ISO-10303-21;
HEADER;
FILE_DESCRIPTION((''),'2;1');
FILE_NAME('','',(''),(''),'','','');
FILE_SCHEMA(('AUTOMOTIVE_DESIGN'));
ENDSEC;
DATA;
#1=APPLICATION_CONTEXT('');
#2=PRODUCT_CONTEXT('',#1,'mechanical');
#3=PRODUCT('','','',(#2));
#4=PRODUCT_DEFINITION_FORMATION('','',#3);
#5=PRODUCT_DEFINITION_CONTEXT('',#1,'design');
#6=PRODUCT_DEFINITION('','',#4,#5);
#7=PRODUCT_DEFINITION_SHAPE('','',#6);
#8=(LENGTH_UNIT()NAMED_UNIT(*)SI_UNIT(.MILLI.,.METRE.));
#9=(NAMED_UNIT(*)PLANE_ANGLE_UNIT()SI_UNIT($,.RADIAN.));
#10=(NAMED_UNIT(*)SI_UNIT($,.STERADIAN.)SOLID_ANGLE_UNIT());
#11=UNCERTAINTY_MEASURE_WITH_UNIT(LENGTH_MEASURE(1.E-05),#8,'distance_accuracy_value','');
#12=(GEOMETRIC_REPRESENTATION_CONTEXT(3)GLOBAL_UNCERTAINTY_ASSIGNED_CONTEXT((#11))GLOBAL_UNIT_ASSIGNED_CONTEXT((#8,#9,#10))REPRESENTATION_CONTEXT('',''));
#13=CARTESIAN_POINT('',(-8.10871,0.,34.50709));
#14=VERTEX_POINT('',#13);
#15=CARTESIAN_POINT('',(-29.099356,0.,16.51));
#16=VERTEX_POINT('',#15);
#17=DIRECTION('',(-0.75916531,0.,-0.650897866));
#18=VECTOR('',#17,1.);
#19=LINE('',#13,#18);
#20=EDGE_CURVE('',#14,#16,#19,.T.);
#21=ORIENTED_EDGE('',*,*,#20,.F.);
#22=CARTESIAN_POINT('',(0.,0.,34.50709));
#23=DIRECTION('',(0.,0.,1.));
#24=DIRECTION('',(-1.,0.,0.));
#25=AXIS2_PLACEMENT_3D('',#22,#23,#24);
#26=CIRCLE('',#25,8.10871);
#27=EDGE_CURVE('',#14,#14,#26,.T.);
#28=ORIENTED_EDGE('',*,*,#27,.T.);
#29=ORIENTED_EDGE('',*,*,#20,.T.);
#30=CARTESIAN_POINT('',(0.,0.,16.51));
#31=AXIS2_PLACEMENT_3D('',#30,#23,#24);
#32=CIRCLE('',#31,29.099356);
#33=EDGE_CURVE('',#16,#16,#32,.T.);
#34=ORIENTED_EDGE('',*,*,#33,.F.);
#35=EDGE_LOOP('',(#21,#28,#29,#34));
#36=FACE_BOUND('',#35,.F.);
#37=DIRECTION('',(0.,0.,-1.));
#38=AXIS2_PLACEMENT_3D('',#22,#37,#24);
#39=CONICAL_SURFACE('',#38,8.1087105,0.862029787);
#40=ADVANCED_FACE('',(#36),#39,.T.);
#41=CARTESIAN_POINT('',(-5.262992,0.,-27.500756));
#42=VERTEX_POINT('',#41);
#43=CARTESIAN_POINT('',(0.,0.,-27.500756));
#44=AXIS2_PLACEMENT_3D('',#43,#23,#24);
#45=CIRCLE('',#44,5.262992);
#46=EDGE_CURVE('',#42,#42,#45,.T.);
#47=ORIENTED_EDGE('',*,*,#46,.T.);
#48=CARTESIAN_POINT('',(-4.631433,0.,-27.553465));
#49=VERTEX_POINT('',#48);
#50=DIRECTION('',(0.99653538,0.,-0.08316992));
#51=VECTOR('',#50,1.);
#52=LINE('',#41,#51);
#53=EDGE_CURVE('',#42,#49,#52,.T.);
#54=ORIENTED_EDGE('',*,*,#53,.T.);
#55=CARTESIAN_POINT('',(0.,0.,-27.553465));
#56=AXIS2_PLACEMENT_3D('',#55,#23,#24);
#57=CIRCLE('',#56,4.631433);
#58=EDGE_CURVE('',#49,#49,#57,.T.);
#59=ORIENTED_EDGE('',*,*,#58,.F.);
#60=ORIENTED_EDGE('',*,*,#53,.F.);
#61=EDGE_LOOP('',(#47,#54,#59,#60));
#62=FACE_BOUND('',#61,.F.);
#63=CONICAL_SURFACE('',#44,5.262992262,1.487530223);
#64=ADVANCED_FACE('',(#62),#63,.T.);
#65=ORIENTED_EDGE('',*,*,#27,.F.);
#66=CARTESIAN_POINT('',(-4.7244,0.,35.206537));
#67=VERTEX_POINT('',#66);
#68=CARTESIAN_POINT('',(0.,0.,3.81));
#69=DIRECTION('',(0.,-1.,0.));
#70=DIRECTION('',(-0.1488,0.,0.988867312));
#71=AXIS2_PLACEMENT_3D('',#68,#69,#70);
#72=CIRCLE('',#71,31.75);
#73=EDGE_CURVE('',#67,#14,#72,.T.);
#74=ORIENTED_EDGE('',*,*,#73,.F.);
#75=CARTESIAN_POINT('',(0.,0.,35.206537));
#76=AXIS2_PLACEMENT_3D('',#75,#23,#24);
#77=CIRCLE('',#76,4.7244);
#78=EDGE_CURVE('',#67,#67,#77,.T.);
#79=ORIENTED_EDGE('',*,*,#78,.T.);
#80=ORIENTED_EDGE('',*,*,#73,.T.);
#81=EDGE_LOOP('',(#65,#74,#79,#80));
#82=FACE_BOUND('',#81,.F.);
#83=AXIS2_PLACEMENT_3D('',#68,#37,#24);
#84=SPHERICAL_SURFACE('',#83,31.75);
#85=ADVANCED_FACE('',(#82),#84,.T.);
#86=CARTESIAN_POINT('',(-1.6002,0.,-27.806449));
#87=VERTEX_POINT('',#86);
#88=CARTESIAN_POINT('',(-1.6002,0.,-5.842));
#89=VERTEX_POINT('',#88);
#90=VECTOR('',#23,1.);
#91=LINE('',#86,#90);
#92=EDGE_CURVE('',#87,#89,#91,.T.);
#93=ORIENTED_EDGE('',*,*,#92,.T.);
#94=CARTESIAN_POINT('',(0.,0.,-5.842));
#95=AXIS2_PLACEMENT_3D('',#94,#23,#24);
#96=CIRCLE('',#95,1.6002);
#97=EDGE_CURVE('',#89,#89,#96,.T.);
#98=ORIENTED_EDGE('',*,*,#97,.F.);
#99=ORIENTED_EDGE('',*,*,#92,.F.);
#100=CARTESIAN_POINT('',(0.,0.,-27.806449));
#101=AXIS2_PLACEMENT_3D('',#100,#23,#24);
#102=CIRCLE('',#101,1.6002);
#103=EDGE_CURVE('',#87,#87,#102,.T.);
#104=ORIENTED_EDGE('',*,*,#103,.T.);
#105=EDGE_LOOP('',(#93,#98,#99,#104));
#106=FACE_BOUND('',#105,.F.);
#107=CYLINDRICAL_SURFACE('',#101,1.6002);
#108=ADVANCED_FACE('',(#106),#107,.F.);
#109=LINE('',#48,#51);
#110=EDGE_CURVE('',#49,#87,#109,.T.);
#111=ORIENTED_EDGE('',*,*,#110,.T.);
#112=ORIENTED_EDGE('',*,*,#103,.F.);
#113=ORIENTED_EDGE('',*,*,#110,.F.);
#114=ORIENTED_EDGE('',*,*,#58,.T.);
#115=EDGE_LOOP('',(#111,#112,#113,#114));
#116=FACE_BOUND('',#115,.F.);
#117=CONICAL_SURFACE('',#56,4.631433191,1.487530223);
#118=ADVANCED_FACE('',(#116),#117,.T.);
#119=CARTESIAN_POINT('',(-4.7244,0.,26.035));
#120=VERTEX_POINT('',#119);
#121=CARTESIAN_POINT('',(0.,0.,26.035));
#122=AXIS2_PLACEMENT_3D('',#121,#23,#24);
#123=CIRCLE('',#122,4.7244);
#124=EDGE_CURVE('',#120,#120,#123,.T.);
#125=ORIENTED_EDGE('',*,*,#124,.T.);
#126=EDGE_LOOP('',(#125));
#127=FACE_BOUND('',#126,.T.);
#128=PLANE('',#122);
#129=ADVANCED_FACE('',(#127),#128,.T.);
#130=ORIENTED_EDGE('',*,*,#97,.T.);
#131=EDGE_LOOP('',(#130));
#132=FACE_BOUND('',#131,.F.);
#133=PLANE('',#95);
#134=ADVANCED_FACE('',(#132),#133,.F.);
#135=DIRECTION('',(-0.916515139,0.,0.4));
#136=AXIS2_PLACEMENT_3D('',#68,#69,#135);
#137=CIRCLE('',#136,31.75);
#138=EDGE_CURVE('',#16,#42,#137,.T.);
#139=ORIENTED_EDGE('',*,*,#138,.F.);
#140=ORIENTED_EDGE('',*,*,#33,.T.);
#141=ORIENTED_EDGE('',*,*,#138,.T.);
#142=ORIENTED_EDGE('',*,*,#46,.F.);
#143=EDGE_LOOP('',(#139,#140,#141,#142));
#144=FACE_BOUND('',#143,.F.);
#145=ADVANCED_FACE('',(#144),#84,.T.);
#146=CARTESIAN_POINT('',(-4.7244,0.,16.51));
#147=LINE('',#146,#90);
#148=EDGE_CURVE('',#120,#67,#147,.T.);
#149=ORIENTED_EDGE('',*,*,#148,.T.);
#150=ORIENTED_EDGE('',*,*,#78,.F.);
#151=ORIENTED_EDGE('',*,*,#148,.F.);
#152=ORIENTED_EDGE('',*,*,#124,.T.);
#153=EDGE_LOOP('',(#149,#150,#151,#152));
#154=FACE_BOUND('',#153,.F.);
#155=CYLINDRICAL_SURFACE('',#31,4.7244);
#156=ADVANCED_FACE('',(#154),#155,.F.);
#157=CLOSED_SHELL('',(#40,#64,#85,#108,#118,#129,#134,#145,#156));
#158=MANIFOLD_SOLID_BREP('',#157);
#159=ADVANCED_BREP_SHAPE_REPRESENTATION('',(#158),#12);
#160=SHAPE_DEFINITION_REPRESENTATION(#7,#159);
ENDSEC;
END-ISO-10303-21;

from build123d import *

# Parameters (mm, degrees)
F0_W = 4.7244
F0_H = 9.525


# Not quite as in the source:
# - a feature names something its author has since deleted; it is built from what else it names


with BuildPart() as f1:
    # F0 (on Front) → F1 (revolve)
    with BuildSketch(Plane.XZ):
        with BuildLine():
            Line((-8.1087104998, 34.5070896671), (-22.5402639736, 16.51))
            ThreePointArc((-22.5402639736, 16.51), (-25.8838273037, -10.5200325148), (-4.6314331906, -27.5534648747))
            Line((-4.6314331906, -27.5534648747), (-1.6002, -27.8064487898))
            Line((-1.6002, -27.8064487898), (-1.6002, -5.842))
            Line((-1.6002, -5.842), (0, -5.842))
            Line((0, -5.842), (0, 0))
            Line((0, 0), (0, 3.81))
            Line((0, 3.81), (0, 16.51))
            Line((0, 16.51), (-4.7244, 16.51))
            Line((-4.7244, 16.51), (-4.7244, 26.035))
            Line((-4.7244, 26.035), (-4.7244, 35.2065371441))
            ThreePointArc((-4.7244, 35.2065371441), (-6.4260787397, 34.9028932721), (-8.1087104998, 34.5070896671))
        make_face()
        with Locations((-2.3622, 21.2725)):
            Rectangle(F0_W, F0_H)
        with BuildLine():
            Line((0, 0), (0, -5.842))
            Line((0, -5.842), (0, -25.4))
            ThreePointArc((0, -25.4), (23.0706956982, -10.625582337), (19.302328875, 16.51))
            Line((19.302328875, 16.51), (0, 16.51))
            Line((0, 16.51), (0, 3.81))
            Line((0, 3.81), (0, 0))
        make_face()
    revolve(axis=Axis((0, 0, 3.81), (0, 0, 1)))

    # F0 (on Front) → F2 (revolve)
    with BuildSketch(Plane.XZ):
        with BuildLine():
            Line((-8.1087104998, 34.5070896671), (-22.5402639736, 16.51))
            ThreePointArc((-22.5402639736, 16.51), (-25.8838273037, -10.5200325148), (-4.6314331906, -27.5534648747))
            Line((-4.6314331906, -27.5534648747), (-1.6002, -27.8064487898))
            Line((-1.6002, -27.8064487898), (-1.6002, -5.842))
            Line((-1.6002, -5.842), (0, -5.842))
            Line((0, -5.842), (0, 0))
            Line((0, 0), (0, 3.81))
            Line((0, 3.81), (0, 16.51))
            Line((0, 16.51), (-4.7244, 16.51))
            Line((-4.7244, 16.51), (-4.7244, 26.035))
            Line((-4.7244, 26.035), (-4.7244, 35.2065371441))
            ThreePointArc((-4.7244, 35.2065371441), (-6.4260787397, 34.9028932721), (-8.1087104998, 34.5070896671))
        make_face()
        with BuildLine():
            ThreePointArc((-4.6314331906, -27.5534648747), (-25.8838273037, -10.5200325148), (-22.5402639736, 16.51))
            Line((-22.5402639736, 16.51), (-29.099355663, 16.51))
            ThreePointArc((-29.099355663, 16.51), (-27.9182626522, -11.3106187202), (-5.2629922621, -27.5007555394))
            Line((-5.2629922621, -27.5007555394), (-4.6314331906, -27.5534648747))
        make_face()
        Polygon((-29.099355663, 16.51), (-22.5402639736, 16.51), (-8.1087104998, 34.5070896671), align=None)
    revolve(axis=Axis((0, 0, -12.065), (0, 0, 1)))


solid = f1.part
